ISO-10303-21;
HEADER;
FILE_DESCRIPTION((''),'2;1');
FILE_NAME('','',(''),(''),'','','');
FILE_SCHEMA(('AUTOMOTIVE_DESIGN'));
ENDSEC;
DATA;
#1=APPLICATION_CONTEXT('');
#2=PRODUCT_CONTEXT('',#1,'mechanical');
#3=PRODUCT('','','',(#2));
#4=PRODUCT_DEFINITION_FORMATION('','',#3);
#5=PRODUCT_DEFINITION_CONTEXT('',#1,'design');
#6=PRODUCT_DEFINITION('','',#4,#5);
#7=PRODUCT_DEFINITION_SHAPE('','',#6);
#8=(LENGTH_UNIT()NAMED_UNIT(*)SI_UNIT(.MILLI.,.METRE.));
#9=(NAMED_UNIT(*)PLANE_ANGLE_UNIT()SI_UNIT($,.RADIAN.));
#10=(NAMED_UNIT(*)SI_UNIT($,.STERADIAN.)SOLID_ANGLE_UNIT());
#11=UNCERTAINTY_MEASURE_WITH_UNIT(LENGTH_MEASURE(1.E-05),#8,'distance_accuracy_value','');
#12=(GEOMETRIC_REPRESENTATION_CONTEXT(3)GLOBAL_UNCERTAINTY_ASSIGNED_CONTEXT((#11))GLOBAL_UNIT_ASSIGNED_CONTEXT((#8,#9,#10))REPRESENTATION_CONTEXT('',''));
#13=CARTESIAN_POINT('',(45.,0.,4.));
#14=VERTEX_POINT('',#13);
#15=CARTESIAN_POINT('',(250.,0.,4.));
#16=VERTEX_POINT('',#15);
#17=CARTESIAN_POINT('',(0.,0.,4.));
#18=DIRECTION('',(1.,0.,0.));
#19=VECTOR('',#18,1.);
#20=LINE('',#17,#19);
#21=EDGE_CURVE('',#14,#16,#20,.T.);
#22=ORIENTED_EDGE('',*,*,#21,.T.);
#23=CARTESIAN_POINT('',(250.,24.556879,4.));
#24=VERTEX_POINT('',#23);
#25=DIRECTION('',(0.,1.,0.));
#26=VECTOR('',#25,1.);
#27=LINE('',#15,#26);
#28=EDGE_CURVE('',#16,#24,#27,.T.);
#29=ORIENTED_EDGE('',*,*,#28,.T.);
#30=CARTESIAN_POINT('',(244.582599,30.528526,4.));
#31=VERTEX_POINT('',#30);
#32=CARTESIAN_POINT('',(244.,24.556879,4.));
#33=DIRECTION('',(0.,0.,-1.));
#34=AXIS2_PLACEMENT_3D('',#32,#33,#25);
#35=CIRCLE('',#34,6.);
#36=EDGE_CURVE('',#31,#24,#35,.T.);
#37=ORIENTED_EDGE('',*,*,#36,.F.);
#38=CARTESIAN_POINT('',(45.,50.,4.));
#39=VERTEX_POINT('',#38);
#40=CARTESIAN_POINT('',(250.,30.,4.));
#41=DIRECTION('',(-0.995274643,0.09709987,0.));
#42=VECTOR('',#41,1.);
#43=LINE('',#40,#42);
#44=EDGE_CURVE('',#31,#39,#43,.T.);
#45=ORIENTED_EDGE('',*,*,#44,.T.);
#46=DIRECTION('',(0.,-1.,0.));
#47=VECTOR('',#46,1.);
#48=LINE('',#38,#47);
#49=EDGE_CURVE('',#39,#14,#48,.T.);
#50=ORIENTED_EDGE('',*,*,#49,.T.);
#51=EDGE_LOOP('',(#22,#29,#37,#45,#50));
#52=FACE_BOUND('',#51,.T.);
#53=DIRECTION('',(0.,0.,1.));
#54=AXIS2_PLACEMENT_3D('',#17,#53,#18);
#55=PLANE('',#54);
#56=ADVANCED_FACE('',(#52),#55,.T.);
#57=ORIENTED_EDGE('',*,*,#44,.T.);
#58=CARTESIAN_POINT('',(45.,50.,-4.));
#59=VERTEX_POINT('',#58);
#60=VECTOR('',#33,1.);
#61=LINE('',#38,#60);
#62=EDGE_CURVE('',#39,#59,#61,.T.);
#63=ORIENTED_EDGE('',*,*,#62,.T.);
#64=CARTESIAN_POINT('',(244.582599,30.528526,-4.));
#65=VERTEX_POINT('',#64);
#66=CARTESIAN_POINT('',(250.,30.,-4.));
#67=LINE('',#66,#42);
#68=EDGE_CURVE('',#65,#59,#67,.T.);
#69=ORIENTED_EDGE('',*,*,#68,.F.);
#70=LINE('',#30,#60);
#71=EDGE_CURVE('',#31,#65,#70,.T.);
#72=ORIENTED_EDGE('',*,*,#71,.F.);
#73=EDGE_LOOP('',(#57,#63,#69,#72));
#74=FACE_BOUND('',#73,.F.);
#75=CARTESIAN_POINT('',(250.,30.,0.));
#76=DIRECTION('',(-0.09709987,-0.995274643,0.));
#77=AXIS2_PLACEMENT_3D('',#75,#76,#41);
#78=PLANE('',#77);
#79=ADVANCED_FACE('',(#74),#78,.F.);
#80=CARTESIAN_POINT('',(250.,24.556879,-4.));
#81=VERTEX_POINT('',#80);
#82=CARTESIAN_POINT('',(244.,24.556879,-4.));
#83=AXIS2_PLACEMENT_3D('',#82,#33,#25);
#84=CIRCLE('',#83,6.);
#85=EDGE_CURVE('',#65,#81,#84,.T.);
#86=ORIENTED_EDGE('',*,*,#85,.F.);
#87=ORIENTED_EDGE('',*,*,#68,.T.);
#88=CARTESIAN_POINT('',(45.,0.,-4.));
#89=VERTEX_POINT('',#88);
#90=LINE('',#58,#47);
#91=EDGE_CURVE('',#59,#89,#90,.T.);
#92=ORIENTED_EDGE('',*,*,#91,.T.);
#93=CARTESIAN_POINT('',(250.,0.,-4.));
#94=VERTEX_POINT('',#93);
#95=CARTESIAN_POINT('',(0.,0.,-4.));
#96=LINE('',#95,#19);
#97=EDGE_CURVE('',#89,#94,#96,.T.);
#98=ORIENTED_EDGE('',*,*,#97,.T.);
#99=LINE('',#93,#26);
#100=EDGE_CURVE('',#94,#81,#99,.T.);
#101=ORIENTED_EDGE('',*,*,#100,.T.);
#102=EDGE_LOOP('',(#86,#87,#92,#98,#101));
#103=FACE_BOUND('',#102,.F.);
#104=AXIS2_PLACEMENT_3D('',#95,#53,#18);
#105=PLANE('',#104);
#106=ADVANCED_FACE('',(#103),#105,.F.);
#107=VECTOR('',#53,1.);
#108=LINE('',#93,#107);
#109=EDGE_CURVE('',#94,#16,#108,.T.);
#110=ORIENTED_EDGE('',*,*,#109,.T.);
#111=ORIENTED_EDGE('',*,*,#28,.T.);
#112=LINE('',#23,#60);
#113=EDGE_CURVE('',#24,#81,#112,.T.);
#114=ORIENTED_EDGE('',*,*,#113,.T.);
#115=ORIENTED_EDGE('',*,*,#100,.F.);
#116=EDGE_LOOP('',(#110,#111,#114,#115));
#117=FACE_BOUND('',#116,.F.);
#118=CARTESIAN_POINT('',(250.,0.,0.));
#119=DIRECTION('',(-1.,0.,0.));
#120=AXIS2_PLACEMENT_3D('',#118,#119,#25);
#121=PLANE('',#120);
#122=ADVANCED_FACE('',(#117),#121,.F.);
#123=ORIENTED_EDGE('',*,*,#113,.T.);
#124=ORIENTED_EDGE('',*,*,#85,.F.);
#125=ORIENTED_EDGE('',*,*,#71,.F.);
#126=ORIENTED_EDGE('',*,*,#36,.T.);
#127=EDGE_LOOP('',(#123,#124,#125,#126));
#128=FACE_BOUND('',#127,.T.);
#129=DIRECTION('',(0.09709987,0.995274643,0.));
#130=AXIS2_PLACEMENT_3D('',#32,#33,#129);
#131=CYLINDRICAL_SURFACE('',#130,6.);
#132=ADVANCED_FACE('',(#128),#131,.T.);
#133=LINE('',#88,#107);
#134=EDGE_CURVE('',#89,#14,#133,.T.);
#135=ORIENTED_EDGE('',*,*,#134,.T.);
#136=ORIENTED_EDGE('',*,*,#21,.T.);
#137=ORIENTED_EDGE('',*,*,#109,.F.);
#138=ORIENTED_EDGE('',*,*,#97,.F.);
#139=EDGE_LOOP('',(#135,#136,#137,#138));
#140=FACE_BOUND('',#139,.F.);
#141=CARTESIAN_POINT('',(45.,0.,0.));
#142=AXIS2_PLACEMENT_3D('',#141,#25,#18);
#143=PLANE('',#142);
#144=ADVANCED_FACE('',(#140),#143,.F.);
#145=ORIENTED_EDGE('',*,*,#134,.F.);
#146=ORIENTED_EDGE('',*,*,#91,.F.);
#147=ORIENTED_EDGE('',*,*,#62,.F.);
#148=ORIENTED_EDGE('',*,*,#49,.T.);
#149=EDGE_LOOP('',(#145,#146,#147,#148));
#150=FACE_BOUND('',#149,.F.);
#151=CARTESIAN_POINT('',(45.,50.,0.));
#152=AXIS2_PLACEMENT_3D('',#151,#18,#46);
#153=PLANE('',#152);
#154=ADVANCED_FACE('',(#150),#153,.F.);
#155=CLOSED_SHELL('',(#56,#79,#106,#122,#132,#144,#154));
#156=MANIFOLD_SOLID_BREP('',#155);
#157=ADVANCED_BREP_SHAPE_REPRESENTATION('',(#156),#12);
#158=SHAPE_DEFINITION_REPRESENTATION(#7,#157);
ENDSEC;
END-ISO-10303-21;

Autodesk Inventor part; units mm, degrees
ref_plane "YZ Plane" through (0, 0, 0) normal (1, 0, 0) x (0, 1, 0)
ref_plane "XZ Plane" through (0, 0, 0) normal (0, 1, 0) x (-1, 0, 0)
ref_plane "XY Plane" through (0, 0, 0) normal (0, 0, 1) x (1, 0, 0)
sketch "Sketch3" plane through (0, 0, 0) normal (0, 0, 1) x (1, 0, 0)
  line L0 (0, 0) -> (250, 0)
  line L1 (250, 0) -> (250, 30)
  line L2 (250, 30) -> (-55.0321, 59.7592)
  line L3 (45, 50) -> (45, 0)
  dimension "d11" = 250
  dimension "d12" = 30
  dimension "d13" = 45
  dimension "d14" = 50
extrude "Plate1" add sketch "Sketch3" along normal mid plane 8
fillet "Corner Round1" radius 6 1 edges at (250, 30, 0)
equation "\"d15\" = Thickness"
equation "\"BendRadius\" = Thickness"
equation "\"BendReliefWidth\" = Thickness"
equation "\"BendReliefDepth\" = 0.5 * Thickness"
equation "\"CornerReliefSize\" = 4 * Thickness"
equation "\"MinimumRemnant\" = 2 * Thickness"
equation "\"TransitionRadius\" = BendRadius"
equation "\"JacobiRadiusSize\" = BendRadius"
equation "\"GapSize\" = Thickness"
equation "\"Thickness\" = 8"
properties part number "TZS 0913 charging hatch reinf" material "Steel"
